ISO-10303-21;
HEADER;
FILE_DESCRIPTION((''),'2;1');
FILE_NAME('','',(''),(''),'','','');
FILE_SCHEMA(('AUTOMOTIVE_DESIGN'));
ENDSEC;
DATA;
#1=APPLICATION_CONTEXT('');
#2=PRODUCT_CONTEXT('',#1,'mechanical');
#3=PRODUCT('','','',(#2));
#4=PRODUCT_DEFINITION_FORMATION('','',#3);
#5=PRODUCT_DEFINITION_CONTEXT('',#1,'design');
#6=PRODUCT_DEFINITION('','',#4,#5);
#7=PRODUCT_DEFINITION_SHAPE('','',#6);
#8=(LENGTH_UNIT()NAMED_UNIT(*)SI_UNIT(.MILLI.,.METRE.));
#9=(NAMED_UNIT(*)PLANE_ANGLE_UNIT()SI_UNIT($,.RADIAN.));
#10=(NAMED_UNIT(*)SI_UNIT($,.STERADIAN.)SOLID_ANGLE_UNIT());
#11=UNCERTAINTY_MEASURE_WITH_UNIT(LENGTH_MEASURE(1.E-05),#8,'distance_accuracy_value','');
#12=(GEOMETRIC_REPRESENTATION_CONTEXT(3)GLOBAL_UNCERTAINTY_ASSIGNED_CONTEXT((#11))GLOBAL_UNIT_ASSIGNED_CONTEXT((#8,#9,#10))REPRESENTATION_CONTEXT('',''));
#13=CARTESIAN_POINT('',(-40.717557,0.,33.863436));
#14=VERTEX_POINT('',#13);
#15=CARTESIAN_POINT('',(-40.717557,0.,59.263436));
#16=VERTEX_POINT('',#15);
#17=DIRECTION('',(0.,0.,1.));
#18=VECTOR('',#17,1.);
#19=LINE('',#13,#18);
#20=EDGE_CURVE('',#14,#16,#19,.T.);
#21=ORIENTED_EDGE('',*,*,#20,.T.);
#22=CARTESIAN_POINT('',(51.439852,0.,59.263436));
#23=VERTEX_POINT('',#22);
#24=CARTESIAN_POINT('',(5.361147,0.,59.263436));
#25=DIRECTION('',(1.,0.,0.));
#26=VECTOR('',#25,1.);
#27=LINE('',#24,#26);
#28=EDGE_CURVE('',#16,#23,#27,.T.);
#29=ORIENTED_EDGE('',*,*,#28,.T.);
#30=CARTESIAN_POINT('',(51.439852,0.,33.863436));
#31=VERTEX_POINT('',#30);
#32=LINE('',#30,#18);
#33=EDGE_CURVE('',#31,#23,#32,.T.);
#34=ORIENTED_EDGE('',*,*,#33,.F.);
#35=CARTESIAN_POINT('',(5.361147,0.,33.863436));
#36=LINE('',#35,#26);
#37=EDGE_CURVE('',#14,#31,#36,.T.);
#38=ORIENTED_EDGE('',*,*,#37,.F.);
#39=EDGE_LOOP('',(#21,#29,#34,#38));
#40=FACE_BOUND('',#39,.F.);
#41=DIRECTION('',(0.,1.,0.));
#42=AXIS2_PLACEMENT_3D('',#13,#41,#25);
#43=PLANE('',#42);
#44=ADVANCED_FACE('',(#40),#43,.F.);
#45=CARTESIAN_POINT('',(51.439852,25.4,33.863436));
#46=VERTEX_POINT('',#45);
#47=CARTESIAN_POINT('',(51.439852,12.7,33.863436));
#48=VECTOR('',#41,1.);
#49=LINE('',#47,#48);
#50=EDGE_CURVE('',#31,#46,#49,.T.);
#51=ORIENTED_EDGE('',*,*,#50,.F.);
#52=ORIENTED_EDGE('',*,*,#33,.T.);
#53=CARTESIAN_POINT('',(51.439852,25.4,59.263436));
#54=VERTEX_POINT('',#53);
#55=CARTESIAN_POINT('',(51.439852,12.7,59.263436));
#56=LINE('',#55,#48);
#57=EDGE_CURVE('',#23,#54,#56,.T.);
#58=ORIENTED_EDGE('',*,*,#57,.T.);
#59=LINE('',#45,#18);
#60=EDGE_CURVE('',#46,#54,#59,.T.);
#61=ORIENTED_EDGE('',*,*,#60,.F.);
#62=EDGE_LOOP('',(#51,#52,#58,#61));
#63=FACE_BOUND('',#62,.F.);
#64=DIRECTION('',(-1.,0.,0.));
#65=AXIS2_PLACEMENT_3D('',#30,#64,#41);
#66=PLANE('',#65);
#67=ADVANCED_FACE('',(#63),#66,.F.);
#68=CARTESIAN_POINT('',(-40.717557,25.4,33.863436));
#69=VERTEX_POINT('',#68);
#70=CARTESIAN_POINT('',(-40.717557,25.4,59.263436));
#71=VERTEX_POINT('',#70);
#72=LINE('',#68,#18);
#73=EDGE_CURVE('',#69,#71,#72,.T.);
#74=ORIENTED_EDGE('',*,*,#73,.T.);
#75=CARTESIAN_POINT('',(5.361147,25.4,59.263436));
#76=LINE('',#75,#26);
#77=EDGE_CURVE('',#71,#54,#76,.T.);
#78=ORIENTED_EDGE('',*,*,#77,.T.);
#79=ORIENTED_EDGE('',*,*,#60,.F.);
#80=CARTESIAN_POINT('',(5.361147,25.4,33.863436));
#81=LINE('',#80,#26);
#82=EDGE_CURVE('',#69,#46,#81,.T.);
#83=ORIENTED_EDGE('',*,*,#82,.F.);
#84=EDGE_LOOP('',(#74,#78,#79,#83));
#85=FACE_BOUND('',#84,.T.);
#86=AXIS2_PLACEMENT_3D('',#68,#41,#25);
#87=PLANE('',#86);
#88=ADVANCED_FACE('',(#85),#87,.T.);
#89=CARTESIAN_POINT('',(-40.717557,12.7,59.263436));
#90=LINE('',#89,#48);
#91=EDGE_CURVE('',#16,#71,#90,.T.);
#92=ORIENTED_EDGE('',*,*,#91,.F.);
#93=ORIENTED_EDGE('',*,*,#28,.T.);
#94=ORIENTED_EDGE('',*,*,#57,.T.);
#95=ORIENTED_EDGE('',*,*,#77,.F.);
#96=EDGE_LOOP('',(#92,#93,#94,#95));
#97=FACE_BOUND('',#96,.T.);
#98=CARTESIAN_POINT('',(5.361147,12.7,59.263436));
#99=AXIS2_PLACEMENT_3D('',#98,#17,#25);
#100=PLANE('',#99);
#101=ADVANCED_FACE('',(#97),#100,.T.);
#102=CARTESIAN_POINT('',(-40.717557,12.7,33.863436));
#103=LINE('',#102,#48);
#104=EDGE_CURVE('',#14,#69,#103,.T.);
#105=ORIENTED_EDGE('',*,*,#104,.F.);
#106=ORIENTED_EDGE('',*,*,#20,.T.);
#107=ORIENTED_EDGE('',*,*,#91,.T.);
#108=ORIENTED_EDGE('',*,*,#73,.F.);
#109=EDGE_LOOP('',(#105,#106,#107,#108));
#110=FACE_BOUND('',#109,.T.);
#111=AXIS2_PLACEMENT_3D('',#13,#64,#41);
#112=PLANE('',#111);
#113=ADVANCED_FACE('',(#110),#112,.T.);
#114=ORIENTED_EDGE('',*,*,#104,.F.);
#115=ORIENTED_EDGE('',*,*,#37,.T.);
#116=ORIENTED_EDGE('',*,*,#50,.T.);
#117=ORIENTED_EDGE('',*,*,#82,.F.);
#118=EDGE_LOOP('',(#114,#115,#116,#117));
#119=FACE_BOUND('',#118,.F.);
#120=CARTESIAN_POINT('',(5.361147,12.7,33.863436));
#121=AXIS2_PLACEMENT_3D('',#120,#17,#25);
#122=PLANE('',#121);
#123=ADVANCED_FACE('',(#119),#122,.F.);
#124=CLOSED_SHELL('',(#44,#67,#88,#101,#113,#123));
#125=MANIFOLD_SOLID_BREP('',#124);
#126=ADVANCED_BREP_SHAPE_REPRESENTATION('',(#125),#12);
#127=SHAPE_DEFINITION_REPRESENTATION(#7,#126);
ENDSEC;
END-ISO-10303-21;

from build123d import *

# Parameters (mm, degrees)
F1_E0_BOTTOM_W = 92.1574085951
F1_E0_BOTTOM_H = 25.4
F2_DEPTH       = 25.4


with BuildPart() as f2:
    # F1_E0_bottom (on explicit) → F2 (new body)
    with BuildSketch(Plane(origin=(-40.7175570726, 0, 33.8634364307), x_dir=(1, 0, 0), z_dir=(0, 0, 1))):
        with Locations((46.0787042975, 12.7)):
            Rectangle(F1_E0_BOTTOM_W, F1_E0_BOTTOM_H)
    extrude(amount=F2_DEPTH)


solid = f2.part
